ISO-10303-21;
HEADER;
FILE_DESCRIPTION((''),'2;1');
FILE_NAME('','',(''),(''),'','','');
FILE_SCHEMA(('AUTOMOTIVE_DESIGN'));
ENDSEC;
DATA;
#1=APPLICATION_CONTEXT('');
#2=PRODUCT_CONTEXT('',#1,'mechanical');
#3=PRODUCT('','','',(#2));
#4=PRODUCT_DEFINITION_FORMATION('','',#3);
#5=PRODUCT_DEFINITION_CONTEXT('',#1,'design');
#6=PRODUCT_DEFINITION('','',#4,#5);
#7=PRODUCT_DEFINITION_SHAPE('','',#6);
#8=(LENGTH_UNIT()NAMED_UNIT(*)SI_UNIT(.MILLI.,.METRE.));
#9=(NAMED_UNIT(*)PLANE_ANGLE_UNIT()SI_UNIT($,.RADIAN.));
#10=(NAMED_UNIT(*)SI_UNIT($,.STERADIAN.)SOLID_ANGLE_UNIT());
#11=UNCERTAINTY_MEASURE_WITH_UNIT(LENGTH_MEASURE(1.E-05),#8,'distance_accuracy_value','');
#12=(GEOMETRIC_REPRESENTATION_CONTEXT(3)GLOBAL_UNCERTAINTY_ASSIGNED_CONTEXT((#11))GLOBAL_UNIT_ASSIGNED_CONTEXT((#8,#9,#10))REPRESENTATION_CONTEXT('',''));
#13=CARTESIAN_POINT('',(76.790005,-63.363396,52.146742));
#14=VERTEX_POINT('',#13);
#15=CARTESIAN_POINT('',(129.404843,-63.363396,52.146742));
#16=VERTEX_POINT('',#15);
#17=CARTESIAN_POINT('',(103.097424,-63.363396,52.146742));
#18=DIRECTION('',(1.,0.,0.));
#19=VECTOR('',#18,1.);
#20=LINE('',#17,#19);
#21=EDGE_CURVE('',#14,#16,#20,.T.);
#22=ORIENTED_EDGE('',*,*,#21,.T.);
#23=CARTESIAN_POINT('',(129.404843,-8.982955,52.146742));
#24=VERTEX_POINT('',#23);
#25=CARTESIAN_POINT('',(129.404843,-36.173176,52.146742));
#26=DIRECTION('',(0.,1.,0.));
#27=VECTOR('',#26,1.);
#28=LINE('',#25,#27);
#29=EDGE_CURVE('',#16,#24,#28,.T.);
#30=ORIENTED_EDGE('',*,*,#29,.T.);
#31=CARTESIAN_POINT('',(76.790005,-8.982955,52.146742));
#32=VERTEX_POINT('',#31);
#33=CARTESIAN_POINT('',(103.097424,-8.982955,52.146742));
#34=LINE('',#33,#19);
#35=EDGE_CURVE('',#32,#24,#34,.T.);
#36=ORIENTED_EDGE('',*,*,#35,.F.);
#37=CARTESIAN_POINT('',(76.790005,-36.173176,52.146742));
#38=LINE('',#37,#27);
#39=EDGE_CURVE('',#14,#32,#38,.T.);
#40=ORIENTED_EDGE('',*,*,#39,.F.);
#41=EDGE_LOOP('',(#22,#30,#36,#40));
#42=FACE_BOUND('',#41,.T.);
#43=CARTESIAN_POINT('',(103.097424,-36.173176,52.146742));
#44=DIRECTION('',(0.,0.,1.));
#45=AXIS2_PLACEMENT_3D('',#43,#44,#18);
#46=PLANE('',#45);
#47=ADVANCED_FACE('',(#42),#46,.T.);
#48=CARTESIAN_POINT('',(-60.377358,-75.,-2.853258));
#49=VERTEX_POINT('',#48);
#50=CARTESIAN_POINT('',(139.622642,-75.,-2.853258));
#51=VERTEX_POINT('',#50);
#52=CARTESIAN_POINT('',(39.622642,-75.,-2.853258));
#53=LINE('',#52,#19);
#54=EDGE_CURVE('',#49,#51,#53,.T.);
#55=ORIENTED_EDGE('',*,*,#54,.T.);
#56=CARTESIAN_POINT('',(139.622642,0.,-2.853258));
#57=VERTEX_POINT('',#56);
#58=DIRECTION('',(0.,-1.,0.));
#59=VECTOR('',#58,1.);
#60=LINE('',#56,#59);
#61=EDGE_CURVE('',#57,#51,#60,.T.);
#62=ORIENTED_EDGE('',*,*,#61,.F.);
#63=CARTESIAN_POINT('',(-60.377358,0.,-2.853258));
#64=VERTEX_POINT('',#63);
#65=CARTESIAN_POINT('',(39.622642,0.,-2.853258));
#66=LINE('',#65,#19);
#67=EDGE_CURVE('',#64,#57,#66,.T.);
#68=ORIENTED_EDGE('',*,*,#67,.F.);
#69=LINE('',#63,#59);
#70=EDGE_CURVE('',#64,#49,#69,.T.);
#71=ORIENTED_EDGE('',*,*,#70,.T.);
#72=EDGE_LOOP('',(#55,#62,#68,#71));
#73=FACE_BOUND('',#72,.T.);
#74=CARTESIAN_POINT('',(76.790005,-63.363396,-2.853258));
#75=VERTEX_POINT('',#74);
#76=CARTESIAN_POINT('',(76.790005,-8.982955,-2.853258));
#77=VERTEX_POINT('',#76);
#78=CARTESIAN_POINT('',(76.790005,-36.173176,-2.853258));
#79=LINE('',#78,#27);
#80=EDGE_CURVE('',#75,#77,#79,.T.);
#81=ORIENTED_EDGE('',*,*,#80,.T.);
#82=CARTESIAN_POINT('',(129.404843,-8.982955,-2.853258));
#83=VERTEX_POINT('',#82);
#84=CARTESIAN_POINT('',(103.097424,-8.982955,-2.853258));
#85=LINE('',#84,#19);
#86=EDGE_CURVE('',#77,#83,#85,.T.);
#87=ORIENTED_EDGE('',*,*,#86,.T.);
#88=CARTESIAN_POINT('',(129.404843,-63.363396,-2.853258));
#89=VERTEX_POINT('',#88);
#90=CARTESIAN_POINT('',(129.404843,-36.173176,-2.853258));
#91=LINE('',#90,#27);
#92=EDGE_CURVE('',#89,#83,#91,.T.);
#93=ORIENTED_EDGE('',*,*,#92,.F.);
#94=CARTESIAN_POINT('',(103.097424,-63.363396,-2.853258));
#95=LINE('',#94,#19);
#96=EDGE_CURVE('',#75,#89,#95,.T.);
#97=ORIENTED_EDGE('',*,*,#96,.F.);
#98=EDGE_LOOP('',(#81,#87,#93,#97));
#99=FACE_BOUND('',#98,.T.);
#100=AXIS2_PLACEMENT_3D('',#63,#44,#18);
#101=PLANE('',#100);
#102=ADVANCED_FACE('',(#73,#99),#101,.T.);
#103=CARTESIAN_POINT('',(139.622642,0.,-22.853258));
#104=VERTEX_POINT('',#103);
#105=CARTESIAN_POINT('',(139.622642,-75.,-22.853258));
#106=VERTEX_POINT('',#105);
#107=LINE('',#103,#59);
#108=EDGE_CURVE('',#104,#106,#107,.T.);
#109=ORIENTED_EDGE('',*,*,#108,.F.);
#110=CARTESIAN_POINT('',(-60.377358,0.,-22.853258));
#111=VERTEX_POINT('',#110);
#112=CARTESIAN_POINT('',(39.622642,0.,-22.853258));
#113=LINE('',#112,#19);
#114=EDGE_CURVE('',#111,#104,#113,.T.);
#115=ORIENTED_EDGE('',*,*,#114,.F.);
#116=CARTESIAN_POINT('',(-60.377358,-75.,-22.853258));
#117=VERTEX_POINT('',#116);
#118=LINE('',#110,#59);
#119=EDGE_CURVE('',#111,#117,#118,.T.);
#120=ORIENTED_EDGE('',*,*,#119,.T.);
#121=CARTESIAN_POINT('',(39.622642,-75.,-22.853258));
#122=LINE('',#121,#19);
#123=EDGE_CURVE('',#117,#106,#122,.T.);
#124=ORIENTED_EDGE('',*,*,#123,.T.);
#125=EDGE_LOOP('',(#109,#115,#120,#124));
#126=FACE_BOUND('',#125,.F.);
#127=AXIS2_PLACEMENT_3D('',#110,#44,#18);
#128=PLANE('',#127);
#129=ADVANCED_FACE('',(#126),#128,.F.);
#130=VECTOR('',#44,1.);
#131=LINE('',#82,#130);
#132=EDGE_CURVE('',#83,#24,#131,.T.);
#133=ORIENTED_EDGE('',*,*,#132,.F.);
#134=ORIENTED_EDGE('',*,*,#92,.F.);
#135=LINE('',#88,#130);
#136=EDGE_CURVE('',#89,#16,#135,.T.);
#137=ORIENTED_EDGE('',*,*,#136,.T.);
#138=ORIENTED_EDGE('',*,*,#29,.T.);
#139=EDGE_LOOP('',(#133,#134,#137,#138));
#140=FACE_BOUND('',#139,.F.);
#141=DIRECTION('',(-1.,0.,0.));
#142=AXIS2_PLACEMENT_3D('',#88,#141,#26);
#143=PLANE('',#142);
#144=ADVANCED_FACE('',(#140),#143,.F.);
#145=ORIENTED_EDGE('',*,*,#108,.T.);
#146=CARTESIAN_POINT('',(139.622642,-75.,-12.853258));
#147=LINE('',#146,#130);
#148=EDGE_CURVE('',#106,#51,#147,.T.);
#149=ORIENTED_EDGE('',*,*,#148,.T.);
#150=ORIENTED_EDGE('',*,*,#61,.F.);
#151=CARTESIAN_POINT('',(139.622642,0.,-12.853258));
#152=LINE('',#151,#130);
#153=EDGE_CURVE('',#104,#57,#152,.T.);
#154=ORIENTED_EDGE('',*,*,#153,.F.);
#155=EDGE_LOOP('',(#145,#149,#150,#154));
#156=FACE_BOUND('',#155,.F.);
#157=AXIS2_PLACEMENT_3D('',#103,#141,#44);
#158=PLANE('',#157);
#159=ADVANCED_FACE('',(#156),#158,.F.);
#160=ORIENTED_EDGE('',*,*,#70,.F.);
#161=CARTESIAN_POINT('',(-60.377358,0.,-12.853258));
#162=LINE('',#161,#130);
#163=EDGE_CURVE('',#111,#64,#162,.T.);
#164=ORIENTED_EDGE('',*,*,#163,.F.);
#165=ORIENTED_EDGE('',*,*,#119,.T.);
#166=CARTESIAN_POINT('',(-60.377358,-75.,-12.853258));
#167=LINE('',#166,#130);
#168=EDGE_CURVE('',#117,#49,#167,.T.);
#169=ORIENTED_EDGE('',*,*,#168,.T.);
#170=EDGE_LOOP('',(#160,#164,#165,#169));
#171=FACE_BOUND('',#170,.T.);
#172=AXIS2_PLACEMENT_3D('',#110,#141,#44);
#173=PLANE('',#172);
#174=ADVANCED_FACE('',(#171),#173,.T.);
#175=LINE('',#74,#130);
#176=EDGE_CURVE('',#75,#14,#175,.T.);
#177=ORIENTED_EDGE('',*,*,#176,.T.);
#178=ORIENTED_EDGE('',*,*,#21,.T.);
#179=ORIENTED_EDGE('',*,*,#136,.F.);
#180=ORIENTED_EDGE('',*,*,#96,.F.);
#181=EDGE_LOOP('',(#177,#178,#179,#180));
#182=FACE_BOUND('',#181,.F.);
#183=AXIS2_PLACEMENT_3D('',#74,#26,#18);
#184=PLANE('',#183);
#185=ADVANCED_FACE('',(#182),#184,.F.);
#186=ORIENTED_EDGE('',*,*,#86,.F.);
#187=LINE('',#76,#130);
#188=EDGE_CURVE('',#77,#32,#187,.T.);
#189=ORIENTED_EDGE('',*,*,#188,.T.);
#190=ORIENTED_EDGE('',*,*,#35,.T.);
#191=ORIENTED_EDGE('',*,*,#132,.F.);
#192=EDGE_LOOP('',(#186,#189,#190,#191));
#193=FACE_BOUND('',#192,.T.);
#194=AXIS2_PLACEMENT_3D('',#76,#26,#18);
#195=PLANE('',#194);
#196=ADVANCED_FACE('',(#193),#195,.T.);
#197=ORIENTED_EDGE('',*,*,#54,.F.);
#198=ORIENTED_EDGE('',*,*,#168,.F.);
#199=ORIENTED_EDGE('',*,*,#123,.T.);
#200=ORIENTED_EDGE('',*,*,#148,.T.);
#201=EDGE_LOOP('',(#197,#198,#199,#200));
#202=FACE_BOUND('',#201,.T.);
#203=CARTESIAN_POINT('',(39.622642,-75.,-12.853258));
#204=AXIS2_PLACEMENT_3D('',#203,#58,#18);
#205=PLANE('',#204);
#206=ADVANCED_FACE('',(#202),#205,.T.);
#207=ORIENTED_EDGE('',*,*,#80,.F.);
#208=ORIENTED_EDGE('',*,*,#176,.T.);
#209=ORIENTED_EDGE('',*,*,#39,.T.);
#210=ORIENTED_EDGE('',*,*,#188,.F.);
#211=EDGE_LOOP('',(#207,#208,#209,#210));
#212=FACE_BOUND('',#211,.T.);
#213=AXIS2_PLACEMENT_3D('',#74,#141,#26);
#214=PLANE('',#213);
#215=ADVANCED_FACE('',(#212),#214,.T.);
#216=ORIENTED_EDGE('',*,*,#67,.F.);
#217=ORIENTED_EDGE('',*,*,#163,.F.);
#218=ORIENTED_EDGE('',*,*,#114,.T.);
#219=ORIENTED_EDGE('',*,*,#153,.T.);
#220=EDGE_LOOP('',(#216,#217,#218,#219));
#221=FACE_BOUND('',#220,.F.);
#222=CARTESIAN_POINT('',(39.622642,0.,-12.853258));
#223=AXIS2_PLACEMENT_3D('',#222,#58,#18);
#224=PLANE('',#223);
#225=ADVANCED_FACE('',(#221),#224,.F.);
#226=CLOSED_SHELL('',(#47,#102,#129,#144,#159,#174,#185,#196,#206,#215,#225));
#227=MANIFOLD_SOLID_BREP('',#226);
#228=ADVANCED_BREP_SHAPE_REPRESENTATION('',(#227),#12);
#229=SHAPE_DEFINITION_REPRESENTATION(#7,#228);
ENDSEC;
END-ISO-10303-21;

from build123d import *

# Parameters (mm, degrees)
F0_W     = 200
F0_H     = 20
F1_DEPTH = 75
F2_W     = 52.6148378849
F2_H     = 54.3804401532
F3_DEPTH = 55


# Not quite as in the source:
# - a feature names something its author has since deleted; it is built from what else it names


with BuildPart() as f1:
    # F0 (on Front) → F1 (new body)
    with BuildSketch(Plane.XZ):
        with Locations((39.6226420999, -12.8532575865)):
            Rectangle(F0_W, F0_H)
    extrude(amount=F1_DEPTH)

    # F2 (on face) → F3 (join)
    with BuildSketch(Plane.XY.offset(-2.8532575865)):
        with Locations((103.0974239111, -36.1731755547)):
            Rectangle(F2_W, F2_H)
    extrude(amount=F3_DEPTH)


solid = f1.part
